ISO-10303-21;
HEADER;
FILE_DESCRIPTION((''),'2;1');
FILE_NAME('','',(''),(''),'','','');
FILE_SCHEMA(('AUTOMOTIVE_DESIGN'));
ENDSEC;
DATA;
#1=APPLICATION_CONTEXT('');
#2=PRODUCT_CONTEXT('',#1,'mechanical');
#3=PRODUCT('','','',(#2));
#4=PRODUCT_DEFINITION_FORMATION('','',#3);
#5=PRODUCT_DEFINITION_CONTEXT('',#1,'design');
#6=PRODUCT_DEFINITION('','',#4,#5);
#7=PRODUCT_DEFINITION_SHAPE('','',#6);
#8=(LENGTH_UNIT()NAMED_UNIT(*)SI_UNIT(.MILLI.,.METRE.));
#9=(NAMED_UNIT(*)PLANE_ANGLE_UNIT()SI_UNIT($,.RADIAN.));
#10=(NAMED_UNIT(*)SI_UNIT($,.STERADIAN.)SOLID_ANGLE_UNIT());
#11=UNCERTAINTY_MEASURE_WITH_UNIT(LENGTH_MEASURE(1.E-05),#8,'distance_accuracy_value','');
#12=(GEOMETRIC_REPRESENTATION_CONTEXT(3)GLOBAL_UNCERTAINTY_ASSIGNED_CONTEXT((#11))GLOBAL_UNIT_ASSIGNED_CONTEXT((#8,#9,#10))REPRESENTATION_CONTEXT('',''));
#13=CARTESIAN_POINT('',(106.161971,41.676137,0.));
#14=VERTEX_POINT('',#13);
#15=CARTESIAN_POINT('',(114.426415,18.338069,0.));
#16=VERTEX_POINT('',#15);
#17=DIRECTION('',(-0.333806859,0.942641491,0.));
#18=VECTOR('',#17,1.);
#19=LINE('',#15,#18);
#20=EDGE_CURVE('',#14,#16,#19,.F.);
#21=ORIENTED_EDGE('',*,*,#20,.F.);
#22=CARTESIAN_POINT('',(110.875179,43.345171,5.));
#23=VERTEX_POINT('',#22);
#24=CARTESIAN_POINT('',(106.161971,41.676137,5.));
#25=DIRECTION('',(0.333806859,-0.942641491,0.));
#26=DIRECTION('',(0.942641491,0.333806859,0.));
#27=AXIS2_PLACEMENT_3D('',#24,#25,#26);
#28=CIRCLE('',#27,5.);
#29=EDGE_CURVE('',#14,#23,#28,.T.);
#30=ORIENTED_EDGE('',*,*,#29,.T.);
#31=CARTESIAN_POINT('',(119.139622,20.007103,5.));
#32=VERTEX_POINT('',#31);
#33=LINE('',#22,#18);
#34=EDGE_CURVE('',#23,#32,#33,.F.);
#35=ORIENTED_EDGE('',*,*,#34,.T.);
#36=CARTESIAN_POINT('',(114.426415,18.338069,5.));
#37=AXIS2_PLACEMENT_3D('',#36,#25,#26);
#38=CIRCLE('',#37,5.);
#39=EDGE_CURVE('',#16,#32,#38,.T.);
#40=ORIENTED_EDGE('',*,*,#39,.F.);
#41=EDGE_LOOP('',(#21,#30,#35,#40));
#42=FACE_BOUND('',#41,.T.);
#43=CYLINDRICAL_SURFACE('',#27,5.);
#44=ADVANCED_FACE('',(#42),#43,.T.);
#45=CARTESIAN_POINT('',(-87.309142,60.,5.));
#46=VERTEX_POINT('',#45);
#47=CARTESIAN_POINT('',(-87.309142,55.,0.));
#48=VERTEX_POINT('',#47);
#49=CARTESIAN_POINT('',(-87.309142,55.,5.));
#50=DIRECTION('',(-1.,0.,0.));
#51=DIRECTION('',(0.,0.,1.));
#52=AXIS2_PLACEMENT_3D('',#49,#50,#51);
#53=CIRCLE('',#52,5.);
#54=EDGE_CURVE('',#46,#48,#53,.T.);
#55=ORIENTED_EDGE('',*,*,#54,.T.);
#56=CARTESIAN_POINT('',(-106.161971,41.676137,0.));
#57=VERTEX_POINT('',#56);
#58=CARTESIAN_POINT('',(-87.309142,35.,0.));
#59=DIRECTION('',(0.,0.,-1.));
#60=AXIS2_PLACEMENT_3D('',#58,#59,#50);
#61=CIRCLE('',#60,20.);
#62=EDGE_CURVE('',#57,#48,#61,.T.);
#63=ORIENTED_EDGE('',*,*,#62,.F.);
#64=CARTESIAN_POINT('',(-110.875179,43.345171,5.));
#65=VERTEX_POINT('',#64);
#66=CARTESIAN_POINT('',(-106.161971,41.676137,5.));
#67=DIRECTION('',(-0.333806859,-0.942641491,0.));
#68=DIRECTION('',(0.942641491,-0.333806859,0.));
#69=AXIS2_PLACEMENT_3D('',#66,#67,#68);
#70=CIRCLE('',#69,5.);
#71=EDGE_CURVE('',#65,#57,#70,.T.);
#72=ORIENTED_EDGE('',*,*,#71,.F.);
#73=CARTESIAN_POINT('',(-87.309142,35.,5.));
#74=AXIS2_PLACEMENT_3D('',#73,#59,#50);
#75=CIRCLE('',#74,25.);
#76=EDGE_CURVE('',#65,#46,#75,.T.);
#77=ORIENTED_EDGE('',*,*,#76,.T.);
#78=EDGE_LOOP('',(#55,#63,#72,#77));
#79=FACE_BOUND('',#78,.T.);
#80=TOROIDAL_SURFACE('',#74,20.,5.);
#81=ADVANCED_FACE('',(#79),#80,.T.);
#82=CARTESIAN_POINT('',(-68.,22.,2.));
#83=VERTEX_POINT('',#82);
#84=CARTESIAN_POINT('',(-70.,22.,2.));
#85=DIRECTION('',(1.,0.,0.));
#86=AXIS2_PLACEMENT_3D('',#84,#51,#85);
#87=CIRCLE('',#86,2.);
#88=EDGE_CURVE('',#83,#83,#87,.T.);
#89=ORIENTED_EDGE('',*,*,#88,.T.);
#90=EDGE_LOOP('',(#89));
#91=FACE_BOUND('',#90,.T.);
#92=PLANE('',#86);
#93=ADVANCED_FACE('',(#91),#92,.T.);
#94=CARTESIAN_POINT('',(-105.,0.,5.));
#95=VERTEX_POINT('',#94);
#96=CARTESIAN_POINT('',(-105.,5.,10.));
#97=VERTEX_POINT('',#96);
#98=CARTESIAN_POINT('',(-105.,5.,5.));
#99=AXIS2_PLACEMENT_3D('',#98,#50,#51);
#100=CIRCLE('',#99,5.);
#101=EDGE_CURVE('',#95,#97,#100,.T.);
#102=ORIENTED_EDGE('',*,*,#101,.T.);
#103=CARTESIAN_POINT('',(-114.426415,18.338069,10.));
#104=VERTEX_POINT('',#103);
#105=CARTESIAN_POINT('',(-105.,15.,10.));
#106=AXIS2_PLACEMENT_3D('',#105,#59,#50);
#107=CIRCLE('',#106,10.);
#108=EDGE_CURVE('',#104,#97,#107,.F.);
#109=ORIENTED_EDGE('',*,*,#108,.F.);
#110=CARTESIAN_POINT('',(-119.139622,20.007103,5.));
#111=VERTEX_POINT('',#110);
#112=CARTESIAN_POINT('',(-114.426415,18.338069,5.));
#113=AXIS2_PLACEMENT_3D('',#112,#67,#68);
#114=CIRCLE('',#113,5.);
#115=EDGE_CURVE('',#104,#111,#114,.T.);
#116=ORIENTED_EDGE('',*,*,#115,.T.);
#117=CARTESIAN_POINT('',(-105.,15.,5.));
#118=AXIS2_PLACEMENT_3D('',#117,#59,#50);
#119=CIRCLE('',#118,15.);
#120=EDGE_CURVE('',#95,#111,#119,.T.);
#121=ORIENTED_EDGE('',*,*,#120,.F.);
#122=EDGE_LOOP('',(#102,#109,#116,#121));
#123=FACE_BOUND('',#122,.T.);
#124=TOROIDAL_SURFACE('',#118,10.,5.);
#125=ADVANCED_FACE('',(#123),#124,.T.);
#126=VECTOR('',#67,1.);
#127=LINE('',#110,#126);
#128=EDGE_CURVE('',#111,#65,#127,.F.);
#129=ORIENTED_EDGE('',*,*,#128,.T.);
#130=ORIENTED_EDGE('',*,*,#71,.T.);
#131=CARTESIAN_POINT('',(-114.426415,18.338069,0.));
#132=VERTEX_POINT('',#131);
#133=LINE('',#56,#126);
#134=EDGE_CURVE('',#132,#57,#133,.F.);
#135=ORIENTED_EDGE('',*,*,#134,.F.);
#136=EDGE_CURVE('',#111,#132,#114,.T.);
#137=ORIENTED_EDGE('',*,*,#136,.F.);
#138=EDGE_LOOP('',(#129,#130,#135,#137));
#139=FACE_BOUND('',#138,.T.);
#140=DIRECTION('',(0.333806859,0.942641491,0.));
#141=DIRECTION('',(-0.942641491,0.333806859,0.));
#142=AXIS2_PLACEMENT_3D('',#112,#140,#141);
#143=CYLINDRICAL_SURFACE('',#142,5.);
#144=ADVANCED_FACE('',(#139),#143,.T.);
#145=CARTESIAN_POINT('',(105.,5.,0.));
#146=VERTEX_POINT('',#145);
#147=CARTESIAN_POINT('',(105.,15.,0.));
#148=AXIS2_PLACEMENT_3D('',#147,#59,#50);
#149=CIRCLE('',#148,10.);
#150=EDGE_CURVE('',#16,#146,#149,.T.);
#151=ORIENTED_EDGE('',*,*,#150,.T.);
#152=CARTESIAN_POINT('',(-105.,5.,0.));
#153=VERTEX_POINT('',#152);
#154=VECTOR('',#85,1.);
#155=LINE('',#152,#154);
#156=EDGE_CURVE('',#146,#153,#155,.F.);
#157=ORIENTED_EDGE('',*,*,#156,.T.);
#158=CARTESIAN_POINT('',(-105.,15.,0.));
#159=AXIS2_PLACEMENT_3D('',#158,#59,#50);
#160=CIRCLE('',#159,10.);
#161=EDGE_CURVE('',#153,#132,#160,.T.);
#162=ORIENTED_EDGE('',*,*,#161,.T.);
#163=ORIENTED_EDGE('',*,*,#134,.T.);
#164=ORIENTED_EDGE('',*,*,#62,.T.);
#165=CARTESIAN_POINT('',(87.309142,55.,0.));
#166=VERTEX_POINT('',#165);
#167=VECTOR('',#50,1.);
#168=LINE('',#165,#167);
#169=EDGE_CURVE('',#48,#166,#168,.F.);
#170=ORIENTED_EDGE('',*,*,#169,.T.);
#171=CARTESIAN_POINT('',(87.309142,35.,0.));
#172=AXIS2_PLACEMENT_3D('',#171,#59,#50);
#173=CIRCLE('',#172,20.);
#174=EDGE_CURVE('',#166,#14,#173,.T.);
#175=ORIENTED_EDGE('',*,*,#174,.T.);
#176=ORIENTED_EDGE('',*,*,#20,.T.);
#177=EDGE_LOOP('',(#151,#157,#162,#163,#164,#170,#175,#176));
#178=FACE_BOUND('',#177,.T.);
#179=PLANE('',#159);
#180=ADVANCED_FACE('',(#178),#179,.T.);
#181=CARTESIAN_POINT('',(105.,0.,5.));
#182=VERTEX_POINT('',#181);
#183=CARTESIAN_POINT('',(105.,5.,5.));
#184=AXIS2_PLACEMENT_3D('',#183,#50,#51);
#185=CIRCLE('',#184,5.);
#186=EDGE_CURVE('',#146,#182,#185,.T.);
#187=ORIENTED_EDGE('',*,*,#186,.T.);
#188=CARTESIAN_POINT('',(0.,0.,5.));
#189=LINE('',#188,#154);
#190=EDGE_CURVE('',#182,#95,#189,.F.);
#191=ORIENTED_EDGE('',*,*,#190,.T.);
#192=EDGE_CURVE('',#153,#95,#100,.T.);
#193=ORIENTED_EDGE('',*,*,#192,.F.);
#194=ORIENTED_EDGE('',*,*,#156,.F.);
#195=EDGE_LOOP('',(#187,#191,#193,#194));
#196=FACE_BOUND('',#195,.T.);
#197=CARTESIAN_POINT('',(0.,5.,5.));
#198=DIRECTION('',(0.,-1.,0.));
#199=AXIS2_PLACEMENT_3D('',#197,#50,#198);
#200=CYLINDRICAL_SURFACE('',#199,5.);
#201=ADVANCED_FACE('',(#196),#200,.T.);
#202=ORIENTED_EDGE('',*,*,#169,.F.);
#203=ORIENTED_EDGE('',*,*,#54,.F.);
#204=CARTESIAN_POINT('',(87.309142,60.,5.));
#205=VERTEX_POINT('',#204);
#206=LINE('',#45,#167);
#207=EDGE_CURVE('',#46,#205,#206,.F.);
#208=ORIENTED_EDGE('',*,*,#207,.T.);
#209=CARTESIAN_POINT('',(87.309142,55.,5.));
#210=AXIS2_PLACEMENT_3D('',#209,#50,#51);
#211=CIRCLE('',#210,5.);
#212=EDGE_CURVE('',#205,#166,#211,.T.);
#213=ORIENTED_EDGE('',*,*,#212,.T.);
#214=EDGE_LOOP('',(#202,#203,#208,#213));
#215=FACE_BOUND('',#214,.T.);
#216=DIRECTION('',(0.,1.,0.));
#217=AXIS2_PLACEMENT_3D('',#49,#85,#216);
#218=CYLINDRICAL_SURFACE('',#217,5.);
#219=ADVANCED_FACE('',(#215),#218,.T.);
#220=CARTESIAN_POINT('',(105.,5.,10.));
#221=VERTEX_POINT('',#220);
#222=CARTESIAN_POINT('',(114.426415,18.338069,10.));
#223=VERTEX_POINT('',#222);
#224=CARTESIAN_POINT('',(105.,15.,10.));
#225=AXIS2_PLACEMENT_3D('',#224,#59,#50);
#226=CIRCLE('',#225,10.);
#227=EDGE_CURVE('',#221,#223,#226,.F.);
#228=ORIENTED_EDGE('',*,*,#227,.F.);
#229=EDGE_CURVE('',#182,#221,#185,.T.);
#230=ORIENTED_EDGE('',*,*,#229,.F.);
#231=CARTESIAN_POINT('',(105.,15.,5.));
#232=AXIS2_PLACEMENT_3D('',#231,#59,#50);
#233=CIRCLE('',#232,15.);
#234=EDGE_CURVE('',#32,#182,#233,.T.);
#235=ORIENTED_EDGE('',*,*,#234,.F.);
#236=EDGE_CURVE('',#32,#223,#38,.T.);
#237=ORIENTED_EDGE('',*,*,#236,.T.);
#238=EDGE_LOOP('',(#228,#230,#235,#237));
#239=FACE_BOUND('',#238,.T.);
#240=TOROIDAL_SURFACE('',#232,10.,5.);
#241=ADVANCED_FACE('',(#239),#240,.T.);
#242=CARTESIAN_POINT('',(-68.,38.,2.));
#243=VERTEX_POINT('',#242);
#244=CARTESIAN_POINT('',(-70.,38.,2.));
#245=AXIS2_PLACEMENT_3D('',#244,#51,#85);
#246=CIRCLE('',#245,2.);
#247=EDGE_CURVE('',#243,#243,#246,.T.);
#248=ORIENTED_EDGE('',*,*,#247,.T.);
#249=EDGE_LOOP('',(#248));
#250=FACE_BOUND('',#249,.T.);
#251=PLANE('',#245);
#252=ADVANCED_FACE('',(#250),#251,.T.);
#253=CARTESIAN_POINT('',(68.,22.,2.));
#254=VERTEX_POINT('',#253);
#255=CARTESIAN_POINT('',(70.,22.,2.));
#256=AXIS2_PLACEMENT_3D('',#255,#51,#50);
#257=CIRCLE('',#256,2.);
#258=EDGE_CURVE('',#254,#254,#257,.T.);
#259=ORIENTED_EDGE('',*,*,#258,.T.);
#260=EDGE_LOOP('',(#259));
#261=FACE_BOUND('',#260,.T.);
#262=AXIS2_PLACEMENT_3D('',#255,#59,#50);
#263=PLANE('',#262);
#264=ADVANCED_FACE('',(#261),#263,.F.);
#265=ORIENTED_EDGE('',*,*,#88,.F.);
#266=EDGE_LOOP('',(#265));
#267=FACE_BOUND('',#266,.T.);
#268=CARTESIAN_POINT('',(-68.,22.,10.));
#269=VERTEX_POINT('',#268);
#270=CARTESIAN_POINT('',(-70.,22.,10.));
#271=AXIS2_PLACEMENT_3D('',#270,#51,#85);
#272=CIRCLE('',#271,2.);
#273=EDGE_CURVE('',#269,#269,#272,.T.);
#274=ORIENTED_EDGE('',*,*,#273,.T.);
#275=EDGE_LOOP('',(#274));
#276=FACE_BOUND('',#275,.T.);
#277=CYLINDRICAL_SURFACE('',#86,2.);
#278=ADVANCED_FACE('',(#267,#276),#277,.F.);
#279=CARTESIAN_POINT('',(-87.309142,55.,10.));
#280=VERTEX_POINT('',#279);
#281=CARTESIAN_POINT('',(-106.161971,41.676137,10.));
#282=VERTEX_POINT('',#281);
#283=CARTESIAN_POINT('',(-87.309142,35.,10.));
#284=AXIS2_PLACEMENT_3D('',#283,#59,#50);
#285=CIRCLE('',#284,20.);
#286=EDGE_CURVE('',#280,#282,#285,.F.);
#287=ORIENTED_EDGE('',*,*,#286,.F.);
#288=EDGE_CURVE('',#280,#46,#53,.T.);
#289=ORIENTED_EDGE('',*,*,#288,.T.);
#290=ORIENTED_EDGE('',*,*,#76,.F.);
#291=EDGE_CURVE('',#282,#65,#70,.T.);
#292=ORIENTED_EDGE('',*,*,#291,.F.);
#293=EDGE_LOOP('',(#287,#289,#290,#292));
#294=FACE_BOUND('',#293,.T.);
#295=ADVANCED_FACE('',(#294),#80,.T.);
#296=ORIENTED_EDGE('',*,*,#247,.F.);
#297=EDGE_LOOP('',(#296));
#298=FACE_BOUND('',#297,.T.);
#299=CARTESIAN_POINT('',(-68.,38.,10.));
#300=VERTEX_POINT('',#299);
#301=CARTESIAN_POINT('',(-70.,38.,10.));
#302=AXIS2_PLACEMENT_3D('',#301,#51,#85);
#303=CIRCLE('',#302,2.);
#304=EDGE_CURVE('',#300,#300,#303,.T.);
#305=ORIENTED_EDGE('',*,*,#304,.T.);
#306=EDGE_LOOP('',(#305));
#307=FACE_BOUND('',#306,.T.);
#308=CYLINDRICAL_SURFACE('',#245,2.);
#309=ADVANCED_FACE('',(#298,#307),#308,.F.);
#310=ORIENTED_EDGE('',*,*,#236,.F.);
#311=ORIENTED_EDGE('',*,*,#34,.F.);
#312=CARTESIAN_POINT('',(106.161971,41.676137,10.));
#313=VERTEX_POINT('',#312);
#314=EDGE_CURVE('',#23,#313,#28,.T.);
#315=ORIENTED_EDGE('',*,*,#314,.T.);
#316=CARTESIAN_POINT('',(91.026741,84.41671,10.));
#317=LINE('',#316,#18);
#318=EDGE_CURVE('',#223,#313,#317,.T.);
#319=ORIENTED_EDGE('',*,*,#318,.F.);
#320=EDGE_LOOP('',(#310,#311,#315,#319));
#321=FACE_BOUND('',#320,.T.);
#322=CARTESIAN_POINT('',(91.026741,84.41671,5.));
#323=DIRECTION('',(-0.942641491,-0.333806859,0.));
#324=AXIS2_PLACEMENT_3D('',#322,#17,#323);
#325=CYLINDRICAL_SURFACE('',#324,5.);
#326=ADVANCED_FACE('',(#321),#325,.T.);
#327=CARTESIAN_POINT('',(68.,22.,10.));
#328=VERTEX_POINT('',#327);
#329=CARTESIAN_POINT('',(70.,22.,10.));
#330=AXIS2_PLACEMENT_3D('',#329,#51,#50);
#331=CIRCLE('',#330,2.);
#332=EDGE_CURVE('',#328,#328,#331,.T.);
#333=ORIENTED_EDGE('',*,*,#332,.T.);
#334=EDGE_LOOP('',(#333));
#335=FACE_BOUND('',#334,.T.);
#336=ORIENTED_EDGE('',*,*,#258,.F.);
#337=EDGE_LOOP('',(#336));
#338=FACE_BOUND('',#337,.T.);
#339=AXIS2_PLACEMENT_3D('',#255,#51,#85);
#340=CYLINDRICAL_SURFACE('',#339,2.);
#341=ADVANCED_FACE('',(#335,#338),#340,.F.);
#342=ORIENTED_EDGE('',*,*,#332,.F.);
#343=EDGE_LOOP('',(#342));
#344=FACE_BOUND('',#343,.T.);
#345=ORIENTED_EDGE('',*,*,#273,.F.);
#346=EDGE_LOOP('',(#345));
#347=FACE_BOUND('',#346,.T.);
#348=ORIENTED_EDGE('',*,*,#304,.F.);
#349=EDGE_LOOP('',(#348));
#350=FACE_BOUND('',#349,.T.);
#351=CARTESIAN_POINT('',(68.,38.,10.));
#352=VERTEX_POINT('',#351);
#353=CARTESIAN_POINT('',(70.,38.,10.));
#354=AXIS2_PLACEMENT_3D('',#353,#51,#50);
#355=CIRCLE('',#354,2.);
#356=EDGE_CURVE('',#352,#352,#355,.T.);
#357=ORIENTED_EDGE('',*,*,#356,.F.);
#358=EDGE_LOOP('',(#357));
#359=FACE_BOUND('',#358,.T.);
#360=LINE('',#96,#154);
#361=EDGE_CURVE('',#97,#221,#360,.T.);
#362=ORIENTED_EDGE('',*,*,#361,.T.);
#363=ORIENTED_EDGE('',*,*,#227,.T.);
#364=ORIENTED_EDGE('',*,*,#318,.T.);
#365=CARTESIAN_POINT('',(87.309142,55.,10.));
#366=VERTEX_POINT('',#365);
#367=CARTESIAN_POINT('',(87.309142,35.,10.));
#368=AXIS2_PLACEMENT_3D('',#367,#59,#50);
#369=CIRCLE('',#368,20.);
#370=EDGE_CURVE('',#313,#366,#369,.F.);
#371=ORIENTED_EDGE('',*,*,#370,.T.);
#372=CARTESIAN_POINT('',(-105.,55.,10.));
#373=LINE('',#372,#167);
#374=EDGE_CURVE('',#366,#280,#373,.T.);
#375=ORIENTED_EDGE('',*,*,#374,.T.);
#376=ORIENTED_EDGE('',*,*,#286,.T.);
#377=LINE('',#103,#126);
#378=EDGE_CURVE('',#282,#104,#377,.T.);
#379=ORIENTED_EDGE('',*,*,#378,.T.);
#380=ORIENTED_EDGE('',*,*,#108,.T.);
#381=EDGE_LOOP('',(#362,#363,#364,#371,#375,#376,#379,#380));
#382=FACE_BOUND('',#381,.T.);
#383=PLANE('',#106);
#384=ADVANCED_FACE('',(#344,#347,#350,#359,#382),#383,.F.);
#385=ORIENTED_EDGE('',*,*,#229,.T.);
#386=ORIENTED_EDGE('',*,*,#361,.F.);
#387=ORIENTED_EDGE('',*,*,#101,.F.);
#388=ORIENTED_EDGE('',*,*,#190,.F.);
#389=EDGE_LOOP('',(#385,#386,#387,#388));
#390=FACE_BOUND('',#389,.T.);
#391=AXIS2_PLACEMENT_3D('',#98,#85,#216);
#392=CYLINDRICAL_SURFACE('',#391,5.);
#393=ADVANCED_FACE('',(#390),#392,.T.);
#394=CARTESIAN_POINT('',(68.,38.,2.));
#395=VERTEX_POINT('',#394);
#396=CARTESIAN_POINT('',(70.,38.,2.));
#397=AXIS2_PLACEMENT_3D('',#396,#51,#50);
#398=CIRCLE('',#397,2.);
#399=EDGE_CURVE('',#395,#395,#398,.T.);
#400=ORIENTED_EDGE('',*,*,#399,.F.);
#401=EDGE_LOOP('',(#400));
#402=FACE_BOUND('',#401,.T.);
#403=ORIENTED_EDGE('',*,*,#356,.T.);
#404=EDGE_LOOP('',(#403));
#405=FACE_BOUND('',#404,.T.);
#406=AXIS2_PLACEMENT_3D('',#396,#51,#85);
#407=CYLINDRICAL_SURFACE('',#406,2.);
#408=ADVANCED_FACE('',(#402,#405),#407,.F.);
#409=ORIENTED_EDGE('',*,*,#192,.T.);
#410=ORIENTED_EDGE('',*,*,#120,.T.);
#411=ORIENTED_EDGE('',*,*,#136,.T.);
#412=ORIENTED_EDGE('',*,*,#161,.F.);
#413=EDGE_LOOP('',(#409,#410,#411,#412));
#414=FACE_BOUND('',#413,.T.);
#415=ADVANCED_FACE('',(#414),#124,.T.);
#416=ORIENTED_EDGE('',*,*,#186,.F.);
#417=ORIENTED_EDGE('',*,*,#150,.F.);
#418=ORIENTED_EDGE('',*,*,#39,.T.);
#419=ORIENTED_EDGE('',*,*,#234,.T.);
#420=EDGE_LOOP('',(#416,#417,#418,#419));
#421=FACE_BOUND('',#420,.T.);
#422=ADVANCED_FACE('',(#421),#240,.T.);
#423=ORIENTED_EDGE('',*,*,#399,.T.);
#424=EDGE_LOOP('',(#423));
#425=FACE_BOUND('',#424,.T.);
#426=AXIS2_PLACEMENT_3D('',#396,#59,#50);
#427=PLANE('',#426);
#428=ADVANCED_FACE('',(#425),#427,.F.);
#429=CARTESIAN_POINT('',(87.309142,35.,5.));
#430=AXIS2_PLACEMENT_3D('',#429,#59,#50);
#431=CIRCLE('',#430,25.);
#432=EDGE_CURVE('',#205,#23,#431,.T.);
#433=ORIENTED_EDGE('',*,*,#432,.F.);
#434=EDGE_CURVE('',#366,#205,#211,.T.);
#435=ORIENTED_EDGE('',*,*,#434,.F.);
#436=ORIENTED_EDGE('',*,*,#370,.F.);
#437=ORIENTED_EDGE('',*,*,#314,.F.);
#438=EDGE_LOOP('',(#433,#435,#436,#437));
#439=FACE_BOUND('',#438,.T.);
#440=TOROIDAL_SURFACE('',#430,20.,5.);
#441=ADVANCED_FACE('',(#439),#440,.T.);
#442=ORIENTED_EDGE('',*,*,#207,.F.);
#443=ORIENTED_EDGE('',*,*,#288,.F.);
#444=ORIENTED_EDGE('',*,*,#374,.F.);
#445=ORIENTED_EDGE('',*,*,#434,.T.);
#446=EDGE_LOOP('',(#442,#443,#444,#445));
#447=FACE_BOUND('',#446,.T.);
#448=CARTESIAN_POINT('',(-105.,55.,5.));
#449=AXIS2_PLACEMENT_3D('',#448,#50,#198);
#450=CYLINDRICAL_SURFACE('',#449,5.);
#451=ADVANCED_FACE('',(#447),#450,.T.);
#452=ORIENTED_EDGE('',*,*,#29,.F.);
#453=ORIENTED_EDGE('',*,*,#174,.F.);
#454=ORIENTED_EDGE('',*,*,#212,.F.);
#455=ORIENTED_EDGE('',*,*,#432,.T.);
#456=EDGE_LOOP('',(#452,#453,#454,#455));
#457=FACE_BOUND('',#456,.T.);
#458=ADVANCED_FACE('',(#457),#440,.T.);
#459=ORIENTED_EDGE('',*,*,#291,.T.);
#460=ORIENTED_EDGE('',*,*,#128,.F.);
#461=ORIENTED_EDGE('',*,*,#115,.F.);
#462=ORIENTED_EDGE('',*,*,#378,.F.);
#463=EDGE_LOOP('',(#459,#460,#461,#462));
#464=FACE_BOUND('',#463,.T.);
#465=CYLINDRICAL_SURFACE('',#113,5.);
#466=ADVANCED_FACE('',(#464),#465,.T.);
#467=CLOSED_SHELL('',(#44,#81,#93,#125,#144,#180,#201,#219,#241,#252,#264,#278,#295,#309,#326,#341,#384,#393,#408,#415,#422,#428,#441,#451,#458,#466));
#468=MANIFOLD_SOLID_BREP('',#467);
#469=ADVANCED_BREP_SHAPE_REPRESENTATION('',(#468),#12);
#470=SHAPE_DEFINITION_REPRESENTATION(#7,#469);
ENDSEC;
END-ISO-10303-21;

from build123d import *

# Parameters (mm, degrees)
BOSS_EXTRUDE1_DEPTH = 10
SKETCH2_R           = 2
CUT_EXTRUDE1_DEPTH  = 8
FILLET1_R           = 5


with BuildPart() as part:
    # Sketch1 → Boss-Extrude1 (new body)
    with BuildSketch(Plane.XY):
        with BuildLine():
            Line((0, 0), (-105, 0))
            ThreePointArc((-105, 0), (-117.249623327, 6.342822149), (-119.139622366, 20.007102889))
            Line((-119.139622366, 20.007102889), (-110.875178831, 43.345171481))
            ThreePointArc((-110.875178831, 43.345171481), (-101.737771304, 55.416038879), (-87.309141554, 60))
            Line((-87.309141554, 60), (87.309141554, 60))
            ThreePointArc((87.309141554, 60), (101.737771304, 55.416038879), (110.875178831, 43.345171481))
            Line((110.875178831, 43.345171481), (119.139622366, 20.007102889))
            ThreePointArc((119.139622366, 20.007102889), (117.249623327, 6.342822149), (105, 0))
            Line((105, 0), (0, 0))
        make_face()
    extrude(amount=BOSS_EXTRUDE1_DEPTH)

    # Sketch2 → Cut-Extrude1 (cut)
    with BuildSketch(Plane.XY.offset(10)):
        with Locations((-70, 22)):
            Circle(SKETCH2_R)
        with Locations((-70, 38)):
            Circle(SKETCH2_R)
        with Locations(Location((70, 22, 0), (0, 0, 180))):
            Circle(SKETCH2_R)
        with Locations(Location((70, 38, 0), (0, 0, 180))):
            Circle(SKETCH2_R)
    extrude(amount=-CUT_EXTRUDE1_DEPTH, mode=Mode.SUBTRACT)

    # Fillet1
    fillet1_edges = [part.edges().sort_by_distance(p)[0] for p in [
        (-117.249623327, 6.342822149, 0),
        (-115.007400599, 31.676137185, 0),
        (-101.737771304, 55.416038879, 0),
        (0, 60, 0),
        (101.737771304, 55.416038879, 0),
        (115.007400599, 31.676137185, 0),
        (117.249623327, 6.342822149, 0),
        (-117.249623327, 6.342822149, 10),
        (-115.007400599, 31.676137185, 10),
        (-101.737771304, 55.416038879, 10),
        (0, 60, 10),
        (101.737771304, 55.416038879, 10),
        (115.007400599, 31.676137185, 10),
        (117.249623327, 6.342822149, 10),
        (0, 0, 0),
        (0, 0, 10),
    ]]
    fillet(fillet1_edges, radius=FILLET1_R - 0.0001)  # a hair under: the kernel refuses the full size


solid = part.part
